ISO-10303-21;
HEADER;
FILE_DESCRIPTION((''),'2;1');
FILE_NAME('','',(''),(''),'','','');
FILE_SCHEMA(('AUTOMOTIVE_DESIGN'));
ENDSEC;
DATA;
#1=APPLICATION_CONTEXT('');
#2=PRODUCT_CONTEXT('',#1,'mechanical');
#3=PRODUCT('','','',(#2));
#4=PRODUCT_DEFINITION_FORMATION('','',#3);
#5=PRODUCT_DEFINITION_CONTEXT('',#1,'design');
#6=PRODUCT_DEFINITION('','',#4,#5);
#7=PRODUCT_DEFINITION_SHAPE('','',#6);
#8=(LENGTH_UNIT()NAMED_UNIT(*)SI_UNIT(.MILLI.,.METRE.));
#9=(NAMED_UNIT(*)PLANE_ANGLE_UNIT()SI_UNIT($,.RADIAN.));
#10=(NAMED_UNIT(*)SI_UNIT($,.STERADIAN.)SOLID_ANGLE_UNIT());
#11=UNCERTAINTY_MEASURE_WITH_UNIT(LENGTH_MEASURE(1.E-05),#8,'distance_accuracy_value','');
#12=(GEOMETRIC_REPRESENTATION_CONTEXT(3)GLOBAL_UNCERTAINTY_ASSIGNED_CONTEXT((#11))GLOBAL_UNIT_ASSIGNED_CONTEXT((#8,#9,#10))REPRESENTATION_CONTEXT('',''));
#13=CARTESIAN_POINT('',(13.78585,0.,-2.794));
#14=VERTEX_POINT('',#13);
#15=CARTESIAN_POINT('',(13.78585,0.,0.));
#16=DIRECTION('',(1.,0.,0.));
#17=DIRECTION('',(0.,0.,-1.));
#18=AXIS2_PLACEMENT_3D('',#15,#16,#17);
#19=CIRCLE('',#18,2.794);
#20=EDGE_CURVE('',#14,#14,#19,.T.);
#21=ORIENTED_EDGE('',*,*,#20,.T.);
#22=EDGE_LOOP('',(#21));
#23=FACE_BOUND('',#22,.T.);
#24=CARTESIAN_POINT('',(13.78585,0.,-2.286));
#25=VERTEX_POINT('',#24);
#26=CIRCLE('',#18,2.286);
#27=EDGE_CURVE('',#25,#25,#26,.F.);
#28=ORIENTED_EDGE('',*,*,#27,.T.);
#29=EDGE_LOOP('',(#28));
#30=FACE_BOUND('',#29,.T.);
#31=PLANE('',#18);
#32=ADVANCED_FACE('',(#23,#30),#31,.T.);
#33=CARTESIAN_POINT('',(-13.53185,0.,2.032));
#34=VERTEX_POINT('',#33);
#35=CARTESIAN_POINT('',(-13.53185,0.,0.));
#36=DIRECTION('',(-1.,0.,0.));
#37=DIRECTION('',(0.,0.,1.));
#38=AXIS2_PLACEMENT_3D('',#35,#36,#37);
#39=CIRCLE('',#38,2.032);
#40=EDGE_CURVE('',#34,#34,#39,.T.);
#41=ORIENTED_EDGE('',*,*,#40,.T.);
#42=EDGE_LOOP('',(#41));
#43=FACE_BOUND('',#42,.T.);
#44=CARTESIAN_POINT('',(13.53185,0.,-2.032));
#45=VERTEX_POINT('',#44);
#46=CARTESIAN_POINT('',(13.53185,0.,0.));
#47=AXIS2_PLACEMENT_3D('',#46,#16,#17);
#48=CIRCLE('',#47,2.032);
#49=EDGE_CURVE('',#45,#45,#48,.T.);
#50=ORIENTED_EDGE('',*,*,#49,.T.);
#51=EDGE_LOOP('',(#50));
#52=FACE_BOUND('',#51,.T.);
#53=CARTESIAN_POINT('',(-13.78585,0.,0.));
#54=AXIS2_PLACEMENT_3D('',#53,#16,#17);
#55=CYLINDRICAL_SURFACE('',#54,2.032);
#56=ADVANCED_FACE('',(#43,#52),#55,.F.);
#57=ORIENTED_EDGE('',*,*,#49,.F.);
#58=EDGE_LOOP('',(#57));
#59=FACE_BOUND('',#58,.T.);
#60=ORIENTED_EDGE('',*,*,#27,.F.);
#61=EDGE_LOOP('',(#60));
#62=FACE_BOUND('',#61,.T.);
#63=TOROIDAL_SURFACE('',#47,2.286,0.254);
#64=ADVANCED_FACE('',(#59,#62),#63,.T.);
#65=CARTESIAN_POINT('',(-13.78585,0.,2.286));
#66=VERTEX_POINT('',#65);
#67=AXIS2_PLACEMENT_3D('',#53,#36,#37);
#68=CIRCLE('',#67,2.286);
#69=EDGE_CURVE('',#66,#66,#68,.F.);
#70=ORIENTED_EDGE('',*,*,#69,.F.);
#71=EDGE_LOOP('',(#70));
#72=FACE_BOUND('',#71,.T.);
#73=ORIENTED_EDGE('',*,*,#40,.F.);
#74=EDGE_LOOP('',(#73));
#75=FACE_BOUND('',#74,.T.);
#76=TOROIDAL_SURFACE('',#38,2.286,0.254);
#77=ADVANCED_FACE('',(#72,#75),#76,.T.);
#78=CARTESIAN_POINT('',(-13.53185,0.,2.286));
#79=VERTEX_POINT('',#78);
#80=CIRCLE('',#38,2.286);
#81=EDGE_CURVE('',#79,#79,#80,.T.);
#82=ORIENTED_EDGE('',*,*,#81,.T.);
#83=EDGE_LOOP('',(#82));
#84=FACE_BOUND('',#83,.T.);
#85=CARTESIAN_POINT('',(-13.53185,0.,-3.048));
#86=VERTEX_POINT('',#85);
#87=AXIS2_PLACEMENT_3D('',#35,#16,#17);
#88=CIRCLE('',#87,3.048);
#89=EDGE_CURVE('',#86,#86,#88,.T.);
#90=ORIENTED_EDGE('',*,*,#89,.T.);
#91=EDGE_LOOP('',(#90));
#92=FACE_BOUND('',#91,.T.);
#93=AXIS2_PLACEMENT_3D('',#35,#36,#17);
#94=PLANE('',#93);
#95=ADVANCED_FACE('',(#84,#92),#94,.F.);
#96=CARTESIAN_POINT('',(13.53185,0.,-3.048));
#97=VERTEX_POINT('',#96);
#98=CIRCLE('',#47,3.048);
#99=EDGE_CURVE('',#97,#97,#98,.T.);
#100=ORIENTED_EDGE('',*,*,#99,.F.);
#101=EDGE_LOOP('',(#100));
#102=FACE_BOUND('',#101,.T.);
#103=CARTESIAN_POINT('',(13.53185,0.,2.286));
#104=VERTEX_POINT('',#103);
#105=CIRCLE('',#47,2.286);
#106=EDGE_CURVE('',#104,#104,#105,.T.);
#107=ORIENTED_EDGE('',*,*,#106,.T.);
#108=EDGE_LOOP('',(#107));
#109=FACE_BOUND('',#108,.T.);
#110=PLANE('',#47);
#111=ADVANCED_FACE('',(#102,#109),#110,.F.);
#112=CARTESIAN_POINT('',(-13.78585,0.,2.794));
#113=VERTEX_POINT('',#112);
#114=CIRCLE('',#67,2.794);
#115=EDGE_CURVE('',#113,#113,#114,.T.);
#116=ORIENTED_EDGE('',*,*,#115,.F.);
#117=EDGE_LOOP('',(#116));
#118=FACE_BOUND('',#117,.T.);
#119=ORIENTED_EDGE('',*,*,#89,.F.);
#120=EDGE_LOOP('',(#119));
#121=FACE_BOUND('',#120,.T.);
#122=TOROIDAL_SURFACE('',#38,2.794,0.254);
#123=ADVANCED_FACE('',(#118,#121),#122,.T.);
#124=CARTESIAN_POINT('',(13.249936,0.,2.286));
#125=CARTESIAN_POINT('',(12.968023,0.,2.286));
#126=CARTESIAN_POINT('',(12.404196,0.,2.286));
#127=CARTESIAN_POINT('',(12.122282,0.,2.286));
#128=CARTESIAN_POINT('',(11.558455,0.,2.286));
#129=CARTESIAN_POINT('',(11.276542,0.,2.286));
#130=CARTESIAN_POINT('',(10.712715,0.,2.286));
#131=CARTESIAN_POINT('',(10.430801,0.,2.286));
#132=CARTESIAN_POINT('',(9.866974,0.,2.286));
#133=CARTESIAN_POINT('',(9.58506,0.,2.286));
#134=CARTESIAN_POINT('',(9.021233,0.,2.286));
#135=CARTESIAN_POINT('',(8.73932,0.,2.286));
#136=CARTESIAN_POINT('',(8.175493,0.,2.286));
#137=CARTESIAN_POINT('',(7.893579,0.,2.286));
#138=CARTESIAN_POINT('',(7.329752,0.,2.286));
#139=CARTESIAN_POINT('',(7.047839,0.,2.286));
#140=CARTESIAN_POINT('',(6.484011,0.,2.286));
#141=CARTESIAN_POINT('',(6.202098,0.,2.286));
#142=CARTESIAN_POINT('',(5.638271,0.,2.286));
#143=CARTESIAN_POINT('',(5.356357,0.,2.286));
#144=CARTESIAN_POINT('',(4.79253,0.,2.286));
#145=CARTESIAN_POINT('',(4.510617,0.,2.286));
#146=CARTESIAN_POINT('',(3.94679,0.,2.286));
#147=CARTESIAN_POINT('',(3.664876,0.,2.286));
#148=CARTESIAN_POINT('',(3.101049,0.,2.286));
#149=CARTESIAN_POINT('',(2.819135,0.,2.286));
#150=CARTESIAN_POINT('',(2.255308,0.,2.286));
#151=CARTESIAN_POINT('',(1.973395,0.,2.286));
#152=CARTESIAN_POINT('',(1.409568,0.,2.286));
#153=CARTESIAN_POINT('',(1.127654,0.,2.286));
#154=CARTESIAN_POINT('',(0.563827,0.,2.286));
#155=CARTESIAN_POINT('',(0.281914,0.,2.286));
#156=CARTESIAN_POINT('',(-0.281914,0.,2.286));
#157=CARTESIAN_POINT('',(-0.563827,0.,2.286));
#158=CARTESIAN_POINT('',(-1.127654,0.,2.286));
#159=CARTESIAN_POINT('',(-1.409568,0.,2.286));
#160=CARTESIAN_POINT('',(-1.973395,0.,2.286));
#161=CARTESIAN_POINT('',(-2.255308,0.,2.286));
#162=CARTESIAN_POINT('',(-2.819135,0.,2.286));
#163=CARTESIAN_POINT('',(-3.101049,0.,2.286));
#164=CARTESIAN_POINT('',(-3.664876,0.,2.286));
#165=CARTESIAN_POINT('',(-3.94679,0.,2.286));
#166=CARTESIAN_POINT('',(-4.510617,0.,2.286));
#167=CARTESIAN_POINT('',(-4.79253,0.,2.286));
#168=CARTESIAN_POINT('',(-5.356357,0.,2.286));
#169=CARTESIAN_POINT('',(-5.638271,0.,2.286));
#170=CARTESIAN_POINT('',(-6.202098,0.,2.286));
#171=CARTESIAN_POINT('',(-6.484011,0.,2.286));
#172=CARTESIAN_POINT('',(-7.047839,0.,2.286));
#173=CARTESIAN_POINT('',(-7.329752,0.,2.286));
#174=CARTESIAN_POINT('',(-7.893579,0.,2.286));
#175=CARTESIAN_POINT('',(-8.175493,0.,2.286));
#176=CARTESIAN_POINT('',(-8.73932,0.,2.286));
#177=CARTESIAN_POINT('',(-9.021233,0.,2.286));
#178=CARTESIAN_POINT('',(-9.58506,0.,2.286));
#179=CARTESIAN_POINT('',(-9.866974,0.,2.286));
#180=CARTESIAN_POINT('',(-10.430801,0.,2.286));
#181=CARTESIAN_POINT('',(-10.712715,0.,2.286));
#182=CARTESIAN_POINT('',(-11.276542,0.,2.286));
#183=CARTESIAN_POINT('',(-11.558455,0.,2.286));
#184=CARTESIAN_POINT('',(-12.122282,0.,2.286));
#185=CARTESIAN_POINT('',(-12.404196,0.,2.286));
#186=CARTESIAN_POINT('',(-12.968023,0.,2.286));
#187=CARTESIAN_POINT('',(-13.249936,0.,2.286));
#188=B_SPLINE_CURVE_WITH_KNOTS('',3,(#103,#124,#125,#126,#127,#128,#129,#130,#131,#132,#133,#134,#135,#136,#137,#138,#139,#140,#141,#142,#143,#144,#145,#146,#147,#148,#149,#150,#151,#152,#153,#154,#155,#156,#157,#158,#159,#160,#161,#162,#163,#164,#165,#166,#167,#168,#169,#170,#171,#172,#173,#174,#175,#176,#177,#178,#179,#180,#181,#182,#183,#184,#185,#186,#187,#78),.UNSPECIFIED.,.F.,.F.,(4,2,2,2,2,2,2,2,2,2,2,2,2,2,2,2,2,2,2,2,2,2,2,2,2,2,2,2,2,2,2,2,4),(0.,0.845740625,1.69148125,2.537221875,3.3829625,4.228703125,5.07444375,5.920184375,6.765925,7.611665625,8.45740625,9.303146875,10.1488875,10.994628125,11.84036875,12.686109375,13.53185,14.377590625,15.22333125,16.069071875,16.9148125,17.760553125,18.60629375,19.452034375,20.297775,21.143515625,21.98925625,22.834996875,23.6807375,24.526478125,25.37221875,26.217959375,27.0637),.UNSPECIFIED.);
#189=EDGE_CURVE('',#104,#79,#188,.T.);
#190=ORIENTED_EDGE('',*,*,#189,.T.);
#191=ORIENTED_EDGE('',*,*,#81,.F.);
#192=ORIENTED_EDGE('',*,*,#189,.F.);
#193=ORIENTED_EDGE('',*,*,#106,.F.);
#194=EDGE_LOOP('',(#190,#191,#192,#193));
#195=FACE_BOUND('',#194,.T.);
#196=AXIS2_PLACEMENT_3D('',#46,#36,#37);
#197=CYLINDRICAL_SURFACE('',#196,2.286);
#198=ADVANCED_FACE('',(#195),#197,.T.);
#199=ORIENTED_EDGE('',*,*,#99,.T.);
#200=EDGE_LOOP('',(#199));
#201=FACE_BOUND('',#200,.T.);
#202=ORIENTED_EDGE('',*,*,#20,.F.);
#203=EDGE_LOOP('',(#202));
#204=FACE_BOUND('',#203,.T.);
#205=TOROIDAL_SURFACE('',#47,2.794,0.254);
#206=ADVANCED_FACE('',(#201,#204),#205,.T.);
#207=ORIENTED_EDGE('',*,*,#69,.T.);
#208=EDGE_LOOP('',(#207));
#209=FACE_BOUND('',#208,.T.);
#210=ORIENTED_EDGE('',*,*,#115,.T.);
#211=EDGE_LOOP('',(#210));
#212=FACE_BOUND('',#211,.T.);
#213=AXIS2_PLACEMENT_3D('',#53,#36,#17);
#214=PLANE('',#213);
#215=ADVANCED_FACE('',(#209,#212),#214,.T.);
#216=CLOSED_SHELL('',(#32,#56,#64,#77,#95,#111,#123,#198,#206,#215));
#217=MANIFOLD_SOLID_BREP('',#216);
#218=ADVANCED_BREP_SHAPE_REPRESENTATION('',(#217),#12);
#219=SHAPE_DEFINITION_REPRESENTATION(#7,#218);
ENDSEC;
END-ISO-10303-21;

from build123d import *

# Parameters (mm, degrees)
SKETCH1_R            = 2.286
EXTRUDE1_DEPTH       = 13.53185
SKETCH2_R            = 3.048
EXTRUDE2_DEPTH       = 0.254
FILLET1_R            = 0.254
FILLET1_OF_MIRROR1_R = 0.254
SKETCH3_R            = 2.032
CUT_EXTRUDE1_DEPTH   = 28.9066167
FILLET2_R            = 0.254


with BuildPart() as part:
    # Sketch1 → Extrude1 (new, symmetric)
    with BuildSketch(Plane(origin=(0, 0, 0), x_dir=(0, 0, -1), z_dir=(1, 0, 0))):
        with Locations(Location((0, 0, 0), (0, 0, 180))):
            Circle(SKETCH1_R)
    extrude(amount=EXTRUDE1_DEPTH, both=True)

    # Sketch2 → Extrude2 (add)
    with BuildSketch(Plane(origin=(13.53185, 0, 0), x_dir=(0, 0, -1), z_dir=(1, 0, 0))):
        Circle(SKETCH2_R)
    extrude2 = extrude(amount=EXTRUDE2_DEPTH)

    # Fillet1
    fillet1_edges = [part.edges().sort_by_distance(p)[0] for p in [
        (13.78585, 0, 3.048),
    ]]
    fillet(fillet1_edges, radius=FILLET1_R - 0.0001)  # a hair under: the kernel refuses the full size

    # Mirror1: Extrude2 across plane
    add(extrude2.mirror(Plane(origin=(0, 0, 0), x_dir=(0, 0, 1), z_dir=(1, 0, 0))))

    # Fillet1 of Mirror1
    fillet1_of_mirror1_edges = [part.edges().sort_by_distance(p)[0] for p in [
        (-13.78585, 0, 3.048),
    ]]
    fillet(fillet1_of_mirror1_edges, radius=FILLET1_OF_MIRROR1_R - 0.0001)  # a hair under: the kernel refuses the full size

    # Sketch3 → Cut-Extrude1 (cut, through all)
    with BuildSketch(Plane(origin=(13.78585, 0, 0), x_dir=(0, 0, -1), z_dir=(1, 0, 0))):
        Circle(SKETCH3_R)
    extrude(amount=-CUT_EXTRUDE1_DEPTH, mode=Mode.SUBTRACT)

    # Fillet2
    fillet2_edges = [part.edges().sort_by_distance(p)[0] for p in [
        (-13.78585, 0, 2.032),
        (13.78585, 0, 2.032),
    ]]
    fillet(fillet2_edges, radius=FILLET2_R)


solid = part.part
